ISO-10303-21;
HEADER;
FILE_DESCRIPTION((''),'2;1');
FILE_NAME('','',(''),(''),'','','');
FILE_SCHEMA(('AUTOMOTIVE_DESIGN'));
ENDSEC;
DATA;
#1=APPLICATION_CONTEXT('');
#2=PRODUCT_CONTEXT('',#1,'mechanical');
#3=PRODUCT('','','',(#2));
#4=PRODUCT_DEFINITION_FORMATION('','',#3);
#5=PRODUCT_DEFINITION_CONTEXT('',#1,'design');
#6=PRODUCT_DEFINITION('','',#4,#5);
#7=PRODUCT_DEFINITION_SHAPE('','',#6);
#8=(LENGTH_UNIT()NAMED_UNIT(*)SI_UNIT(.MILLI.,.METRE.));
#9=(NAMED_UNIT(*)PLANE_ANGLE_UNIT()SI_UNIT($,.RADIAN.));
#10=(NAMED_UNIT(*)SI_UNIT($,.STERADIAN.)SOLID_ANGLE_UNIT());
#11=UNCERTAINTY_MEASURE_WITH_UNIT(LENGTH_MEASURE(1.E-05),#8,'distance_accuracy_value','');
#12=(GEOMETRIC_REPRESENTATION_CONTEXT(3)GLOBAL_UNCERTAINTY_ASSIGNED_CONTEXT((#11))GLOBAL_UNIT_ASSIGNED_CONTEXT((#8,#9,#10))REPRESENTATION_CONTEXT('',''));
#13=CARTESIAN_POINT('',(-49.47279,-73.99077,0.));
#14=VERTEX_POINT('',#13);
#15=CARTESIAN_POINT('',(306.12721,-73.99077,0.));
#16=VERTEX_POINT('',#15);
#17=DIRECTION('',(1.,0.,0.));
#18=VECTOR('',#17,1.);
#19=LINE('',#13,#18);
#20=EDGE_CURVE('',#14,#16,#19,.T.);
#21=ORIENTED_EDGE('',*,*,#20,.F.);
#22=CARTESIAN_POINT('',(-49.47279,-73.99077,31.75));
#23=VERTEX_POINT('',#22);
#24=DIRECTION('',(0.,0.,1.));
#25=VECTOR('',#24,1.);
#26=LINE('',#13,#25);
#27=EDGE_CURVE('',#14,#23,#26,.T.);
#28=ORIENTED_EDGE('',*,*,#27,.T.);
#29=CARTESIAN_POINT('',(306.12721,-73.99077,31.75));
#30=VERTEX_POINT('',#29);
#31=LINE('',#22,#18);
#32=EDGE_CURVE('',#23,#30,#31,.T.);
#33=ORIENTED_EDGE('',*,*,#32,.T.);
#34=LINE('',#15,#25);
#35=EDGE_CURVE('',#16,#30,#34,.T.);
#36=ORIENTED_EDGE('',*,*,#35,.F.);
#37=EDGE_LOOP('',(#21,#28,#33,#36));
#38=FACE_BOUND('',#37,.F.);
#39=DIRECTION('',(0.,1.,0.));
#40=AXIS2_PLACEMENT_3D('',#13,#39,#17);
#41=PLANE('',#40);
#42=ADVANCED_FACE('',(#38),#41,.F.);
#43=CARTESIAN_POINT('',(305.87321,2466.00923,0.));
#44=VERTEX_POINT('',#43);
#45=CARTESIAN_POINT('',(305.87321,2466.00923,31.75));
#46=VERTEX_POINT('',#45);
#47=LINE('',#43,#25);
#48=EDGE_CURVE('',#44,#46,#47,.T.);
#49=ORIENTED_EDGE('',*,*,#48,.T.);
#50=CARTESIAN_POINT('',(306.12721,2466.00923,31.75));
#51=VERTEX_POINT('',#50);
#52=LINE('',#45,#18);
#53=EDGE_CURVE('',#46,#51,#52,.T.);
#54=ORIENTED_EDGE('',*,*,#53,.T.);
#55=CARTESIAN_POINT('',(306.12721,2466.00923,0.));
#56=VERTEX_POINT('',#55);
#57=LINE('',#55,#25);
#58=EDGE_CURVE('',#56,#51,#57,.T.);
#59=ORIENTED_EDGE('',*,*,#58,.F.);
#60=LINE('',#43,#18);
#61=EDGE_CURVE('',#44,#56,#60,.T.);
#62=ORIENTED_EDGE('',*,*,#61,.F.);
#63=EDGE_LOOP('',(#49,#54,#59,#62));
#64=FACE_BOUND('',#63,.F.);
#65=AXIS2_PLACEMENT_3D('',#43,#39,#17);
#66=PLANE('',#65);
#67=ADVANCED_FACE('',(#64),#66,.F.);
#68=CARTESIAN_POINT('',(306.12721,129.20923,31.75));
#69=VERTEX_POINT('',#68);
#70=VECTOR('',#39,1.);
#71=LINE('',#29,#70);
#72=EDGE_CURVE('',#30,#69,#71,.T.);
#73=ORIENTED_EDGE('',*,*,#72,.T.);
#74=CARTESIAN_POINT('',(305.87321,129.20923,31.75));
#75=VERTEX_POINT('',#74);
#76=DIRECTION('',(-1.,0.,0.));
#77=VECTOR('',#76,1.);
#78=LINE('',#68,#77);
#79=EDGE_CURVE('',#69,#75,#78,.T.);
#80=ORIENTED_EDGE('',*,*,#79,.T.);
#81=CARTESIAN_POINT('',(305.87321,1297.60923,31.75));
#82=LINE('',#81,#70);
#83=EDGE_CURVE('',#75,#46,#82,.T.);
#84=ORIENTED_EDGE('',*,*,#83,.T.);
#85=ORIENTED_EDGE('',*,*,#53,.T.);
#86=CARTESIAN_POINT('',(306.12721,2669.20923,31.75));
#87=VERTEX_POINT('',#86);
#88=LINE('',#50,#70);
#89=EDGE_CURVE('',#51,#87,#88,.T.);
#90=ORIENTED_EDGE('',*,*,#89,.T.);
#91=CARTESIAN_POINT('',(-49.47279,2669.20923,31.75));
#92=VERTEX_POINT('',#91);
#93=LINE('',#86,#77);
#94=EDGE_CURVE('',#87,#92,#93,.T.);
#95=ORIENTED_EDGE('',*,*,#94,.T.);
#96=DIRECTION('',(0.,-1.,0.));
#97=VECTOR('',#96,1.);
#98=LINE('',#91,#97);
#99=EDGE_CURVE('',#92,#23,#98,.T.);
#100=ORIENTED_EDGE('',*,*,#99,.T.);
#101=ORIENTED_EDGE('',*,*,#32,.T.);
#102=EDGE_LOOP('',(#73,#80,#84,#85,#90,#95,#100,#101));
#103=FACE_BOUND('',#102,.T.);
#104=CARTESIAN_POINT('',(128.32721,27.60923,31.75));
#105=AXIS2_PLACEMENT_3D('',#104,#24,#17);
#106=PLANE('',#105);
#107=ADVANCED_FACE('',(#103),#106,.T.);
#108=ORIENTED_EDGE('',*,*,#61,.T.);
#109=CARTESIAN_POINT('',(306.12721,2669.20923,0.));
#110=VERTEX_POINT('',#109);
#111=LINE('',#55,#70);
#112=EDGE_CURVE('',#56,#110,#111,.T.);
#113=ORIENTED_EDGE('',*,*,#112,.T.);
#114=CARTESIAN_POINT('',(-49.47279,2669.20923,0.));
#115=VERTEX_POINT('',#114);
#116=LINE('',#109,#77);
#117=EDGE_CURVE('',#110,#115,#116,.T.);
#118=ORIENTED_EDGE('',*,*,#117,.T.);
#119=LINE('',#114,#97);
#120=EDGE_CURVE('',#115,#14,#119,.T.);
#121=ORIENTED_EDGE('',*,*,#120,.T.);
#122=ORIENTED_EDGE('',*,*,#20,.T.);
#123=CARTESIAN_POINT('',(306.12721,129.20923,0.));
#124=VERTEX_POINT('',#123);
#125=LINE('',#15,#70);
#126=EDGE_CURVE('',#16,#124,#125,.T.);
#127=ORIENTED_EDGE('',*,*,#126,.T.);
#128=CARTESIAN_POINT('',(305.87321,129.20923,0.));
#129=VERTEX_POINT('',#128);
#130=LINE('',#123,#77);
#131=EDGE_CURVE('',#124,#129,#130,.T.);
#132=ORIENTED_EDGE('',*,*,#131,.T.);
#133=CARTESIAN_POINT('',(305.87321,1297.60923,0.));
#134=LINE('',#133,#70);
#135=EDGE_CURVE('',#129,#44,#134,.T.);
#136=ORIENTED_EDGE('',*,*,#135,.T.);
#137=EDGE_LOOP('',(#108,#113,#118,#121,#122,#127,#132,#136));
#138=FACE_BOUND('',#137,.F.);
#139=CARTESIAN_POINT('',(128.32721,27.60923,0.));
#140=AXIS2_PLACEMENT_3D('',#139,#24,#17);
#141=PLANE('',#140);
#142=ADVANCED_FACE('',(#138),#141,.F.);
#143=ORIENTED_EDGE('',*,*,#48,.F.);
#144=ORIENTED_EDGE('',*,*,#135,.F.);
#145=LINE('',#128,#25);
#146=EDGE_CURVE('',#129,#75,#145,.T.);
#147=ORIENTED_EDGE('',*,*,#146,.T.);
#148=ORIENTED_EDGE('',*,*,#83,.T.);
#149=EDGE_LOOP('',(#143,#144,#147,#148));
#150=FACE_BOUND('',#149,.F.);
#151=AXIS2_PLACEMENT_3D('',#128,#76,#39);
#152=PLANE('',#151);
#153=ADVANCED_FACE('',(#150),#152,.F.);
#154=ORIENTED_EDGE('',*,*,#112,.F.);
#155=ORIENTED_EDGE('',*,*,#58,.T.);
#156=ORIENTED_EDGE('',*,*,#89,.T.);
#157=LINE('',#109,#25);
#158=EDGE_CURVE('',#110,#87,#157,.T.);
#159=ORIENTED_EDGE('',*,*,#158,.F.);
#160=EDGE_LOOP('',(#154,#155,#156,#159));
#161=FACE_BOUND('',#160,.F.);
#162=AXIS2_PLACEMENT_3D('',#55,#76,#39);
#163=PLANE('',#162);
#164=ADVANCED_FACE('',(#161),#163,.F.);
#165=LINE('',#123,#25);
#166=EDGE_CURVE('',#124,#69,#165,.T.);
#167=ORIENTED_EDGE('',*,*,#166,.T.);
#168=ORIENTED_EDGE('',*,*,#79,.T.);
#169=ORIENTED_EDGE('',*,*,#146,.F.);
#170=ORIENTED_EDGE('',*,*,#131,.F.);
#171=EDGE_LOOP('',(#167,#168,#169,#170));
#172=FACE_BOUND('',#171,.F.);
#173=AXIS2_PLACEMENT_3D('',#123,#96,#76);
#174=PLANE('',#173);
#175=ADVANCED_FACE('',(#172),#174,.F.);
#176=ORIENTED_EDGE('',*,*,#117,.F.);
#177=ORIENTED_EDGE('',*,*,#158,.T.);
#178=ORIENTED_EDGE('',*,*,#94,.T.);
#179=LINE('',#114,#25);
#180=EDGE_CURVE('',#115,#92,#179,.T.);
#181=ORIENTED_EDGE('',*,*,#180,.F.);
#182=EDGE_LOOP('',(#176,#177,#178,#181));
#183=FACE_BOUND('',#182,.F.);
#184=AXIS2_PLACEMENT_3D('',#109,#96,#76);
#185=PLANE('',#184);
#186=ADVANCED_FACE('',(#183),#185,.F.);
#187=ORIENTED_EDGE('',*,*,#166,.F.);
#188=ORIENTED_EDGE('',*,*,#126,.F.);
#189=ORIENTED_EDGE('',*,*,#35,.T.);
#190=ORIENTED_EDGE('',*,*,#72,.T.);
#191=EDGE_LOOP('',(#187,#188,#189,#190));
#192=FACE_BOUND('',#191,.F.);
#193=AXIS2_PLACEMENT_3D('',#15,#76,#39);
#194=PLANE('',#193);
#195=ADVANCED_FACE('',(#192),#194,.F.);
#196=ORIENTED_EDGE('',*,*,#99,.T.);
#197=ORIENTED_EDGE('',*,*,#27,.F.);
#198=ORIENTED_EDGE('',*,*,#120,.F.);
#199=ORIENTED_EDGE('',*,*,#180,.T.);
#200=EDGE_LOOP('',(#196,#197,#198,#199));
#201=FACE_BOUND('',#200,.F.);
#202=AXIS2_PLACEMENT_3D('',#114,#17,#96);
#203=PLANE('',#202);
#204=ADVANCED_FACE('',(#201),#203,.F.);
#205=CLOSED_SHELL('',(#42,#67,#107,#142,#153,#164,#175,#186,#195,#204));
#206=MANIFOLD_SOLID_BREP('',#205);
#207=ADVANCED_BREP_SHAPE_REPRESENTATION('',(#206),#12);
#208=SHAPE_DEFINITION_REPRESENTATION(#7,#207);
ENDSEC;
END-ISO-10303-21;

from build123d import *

# Parameters (mm, degrees)
F0_W     = 118.618
F0_H     = 2336.8
F0_W_2   = 118.364
F1_DEPTH = 31.75


# Not quite as in the source:
# - a feature names something its author has since deleted; it is built from what else it names


with BuildPart() as f1:
    # F0 (on Top) → F1 (new body)
    with BuildSketch(Plane.XY):
        Polygon((-49.4727902114, 129.2092303157), (-49.4727902114, -73.9907696843), (306.1272097886, -73.9907696843), (306.1272097886, 129.2092303157), (305.8732097886, 129.2092303157), (187.2552097886, 129.2092303157), (68.8912097886, 129.2092303157), align=None)
        with Locations((246.5642097886, 1297.6092303157)):
            Rectangle(F0_W, F0_H)
        with Locations((128.0732097886, 1297.6092303157)):
            Rectangle(F0_W_2, F0_H)
        with Locations((9.7092097886, 1297.6092303157)):
            Rectangle(F0_W_2, F0_H)
        Polygon((-49.4727902114, 2669.2092303157), (-49.4727902114, 2466.0092303157), (68.8912097886, 2466.0092303157), (187.2552097886, 2466.0092303157), (305.8732097886, 2466.0092303157), (306.1272097886, 2466.0092303157), (306.1272097886, 2669.2092303157), align=None)
    extrude(amount=F1_DEPTH)


solid = f1.part
